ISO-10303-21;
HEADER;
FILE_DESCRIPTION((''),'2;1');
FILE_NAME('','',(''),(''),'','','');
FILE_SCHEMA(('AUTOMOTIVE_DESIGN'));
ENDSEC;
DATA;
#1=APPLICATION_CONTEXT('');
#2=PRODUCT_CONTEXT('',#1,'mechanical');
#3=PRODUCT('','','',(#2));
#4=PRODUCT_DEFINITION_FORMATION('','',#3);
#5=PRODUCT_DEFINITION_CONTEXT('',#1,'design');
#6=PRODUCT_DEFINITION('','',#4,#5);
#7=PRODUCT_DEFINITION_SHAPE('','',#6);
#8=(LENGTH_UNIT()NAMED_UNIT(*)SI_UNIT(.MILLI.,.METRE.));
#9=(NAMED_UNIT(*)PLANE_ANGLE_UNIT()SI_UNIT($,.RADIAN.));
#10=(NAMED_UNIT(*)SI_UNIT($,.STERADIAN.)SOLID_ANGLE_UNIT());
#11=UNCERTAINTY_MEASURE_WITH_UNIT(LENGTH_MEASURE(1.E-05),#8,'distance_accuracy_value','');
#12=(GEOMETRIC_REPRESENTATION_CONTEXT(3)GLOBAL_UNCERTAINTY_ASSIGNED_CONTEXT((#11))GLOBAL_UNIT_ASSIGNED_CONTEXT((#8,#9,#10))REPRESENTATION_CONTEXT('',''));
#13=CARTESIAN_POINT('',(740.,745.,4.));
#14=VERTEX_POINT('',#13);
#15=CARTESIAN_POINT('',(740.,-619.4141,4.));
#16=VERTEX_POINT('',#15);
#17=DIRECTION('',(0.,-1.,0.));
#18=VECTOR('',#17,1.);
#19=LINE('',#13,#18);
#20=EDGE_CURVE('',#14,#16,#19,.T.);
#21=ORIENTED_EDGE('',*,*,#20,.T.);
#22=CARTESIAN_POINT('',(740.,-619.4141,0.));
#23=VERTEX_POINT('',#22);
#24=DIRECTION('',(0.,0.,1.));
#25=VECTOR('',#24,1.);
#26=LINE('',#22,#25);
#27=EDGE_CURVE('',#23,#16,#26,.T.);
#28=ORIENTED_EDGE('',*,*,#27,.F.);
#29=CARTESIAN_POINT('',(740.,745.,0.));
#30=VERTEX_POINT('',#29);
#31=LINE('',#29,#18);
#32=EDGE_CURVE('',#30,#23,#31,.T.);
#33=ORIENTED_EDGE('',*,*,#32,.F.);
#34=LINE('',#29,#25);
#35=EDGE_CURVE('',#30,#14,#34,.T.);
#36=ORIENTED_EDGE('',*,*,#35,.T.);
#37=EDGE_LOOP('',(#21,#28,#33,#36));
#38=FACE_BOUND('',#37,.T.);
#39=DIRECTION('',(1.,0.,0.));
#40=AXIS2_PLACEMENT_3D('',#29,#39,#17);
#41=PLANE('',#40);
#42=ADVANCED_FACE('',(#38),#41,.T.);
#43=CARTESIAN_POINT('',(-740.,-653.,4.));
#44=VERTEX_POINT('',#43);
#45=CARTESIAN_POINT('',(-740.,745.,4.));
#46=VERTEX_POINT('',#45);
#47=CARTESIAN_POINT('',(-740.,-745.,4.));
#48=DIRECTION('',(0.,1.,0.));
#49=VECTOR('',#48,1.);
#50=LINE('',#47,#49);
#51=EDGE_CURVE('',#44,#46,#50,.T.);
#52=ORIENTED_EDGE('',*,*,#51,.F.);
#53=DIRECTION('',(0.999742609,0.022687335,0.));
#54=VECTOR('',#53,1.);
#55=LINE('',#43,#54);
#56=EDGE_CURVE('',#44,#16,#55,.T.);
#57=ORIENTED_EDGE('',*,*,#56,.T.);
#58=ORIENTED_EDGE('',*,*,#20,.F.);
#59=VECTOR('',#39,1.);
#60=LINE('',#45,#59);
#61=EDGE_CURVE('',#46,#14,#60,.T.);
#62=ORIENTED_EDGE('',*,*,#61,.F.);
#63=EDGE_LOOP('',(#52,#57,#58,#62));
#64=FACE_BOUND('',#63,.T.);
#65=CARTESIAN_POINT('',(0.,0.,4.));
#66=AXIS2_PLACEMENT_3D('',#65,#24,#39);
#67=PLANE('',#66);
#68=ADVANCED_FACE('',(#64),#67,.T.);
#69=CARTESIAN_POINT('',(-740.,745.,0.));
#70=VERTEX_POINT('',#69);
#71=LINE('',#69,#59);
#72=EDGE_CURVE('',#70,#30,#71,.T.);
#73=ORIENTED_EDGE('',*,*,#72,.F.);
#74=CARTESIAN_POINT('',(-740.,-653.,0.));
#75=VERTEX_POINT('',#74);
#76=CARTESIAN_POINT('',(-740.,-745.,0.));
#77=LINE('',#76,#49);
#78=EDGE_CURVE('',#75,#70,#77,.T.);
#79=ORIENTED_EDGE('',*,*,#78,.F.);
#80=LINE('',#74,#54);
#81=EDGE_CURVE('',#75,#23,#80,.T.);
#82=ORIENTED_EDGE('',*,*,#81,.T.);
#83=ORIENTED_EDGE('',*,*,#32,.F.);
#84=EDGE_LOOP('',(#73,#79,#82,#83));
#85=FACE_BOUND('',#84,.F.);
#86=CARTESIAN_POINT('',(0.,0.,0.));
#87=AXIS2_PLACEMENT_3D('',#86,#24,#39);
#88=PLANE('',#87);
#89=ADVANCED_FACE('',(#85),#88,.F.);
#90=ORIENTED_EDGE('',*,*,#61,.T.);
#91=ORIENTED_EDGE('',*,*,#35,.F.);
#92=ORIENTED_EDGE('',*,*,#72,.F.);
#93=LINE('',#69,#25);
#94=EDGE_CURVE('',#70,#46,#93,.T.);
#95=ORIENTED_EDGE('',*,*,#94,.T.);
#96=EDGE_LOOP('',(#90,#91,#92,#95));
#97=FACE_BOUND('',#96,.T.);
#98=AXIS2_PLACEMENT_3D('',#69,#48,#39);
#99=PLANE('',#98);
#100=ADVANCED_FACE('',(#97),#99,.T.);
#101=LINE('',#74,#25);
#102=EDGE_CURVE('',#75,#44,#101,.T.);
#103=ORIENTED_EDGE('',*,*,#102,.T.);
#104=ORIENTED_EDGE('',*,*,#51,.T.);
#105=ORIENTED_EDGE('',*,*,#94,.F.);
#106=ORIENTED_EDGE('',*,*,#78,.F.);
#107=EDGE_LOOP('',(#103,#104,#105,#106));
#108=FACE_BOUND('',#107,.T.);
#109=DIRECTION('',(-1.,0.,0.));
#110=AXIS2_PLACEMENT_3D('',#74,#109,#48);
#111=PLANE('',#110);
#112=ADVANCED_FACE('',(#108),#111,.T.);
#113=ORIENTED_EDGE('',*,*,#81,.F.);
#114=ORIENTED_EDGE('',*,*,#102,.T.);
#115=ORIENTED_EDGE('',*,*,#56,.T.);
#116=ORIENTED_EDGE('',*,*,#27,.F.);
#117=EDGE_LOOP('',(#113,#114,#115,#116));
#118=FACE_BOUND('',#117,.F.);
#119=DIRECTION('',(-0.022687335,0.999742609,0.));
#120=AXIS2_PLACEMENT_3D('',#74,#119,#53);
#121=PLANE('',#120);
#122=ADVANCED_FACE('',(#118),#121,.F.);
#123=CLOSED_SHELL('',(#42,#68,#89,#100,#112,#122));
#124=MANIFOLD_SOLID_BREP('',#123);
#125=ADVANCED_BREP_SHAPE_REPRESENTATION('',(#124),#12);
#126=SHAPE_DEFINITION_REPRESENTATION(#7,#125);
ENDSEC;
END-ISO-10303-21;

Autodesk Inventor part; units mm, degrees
ref_plane "YZ Plane" through (0, 0, 0) normal (1, 0, 0) x (0, 1, 0)
ref_plane "XZ Plane" through (0, 0, 0) normal (0, 1, 0) x (-1, 0, 0)
ref_plane "XY Plane" through (0, 0, 0) normal (0, 0, 1) x (1, 0, 0)
sketch "Sketch1" plane through (0, 0, 0) normal (0, 0, 1) x (1, 0, 0)
  line L0 (740, -745) -> (-740, -745)
  line L1 (-740, -745) -> (-740, 745)
  line L2 (-740, 745) -> (740, 745)
  line L3 (740, 745) -> (740, -745)
  line L4 (740, -745) -> (-740, 745) construction
  line L5 (-740, -745) -> (740, 745) construction
  line L6 (-740, -653) -> (740, -619.4141)
  point P0 (0, 0)
  dimension "d0" = 1480
  dimension "d1" = 1490
  dimension "d3" = 92
  dimension "d4" = 1.3
extrude "Plate1" add sketch "Sketch1" along normal blind 4 contours L6 L1 L2 L3
sketch "Эскиз4" plane through (0, 0, 0) normal (0, 0, -1) x (-1, 0, 0)
  line L0 (549.4783, -556.3714) -> (549.4783, -1054.5075) construction
  line L1 (549.4783, -1054.5075) -> (509.8511, -1054.5075) construction
  line L2 (509.8511, -1054.5075) -> (509.8511, -556.3714) construction
  line L3 (509.8511, -556.3714) -> (549.4783, -556.3714) construction
  line L4 (669.2463, -492.5) -> (669.2463, -589.5) projected
  line L5 (669.2463, -589.5) -> (665.2463, -589.5) projected
  line L6 (169.3732, -492.5) -> (169.3732, -589.5) projected
  line L7 (169.3732, -589.5) -> (165.3732, -589.5) projected
  line L8 (-330.5, -492.5) -> (-330.5, -589.5) projected
  line L9 (-330.5, -589.5) -> (-334.5, -589.5) projected
  line L10 (669.2463, 715.5) -> (669.2463, 775.5) projected
  line L11 (669.2463, 715.5) -> (665.2463, 715.5) projected
  line L12 (169.3732, 715.5) -> (169.3732, 775.5) projected
  line L13 (169.3732, 715.5) -> (165.3732, 715.5) projected
  line L14 (-330.5, 715.5) -> (-330.5, 775.5) projected
  line L15 (-330.5, 715.5) -> (-334.5, 715.5) projected
  line L16 (709.6246, -489) -> (769.6246, -489) projected
  line L17 (709.6246, -489) -> (709.6246, -485) projected
  line L18 (709.6246, 7.6667) -> (769.6246, 7.6667) projected
  line L19 (709.6246, 7.6667) -> (709.6246, 11.6667) projected
  line L20 (709.6246, 504.3333) -> (769.6246, 504.3333) projected
  line L21 (709.6246, 504.3333) -> (709.6246, 508.3333) projected
  line L22 (-740, -489) -> (-710, -489) projected
  line L23 (-710, -489) -> (-710, -485) projected
  line L24 (-740, 7.6667) -> (-710, 7.6667) projected
  line L25 (-710, 7.6667) -> (-710, 11.6667) projected
  line L26 (-740, 504.3333) -> (-710, 504.3333) projected
  line L27 (-710, 504.3333) -> (-710, 508.3333) projected
  point P0 (0, 0)
mark "Маркировка3"
equation "\"d0\" = Лист_ширина"
equation "\"d1\" = 0.5 * Лист_длина"
equation "\"d2\" = Thickness"
equation "\"BendRadius\" = Thickness"
equation "\"BendReliefWidth\" = Thickness"
equation "\"BendReliefDepth\" = 0.5 * Thickness"
equation "\"CornerReliefSize\" = 4 * Thickness"
equation "\"MinimumRemnant\" = 2 * Thickness"
equation "\"TransitionRadius\" = BendRadius"
equation "\"JacobiRadiusSize\" = BendRadius"
equation "\"GapSize\" = Thickness"
equation "\"Лист_ширина\" = 1480"
equation "\"Лист_длина\" = 2980"
equation "\"Thickness\" = 4"
properties part number "GBK 3111 shield 1" material "Steel"
